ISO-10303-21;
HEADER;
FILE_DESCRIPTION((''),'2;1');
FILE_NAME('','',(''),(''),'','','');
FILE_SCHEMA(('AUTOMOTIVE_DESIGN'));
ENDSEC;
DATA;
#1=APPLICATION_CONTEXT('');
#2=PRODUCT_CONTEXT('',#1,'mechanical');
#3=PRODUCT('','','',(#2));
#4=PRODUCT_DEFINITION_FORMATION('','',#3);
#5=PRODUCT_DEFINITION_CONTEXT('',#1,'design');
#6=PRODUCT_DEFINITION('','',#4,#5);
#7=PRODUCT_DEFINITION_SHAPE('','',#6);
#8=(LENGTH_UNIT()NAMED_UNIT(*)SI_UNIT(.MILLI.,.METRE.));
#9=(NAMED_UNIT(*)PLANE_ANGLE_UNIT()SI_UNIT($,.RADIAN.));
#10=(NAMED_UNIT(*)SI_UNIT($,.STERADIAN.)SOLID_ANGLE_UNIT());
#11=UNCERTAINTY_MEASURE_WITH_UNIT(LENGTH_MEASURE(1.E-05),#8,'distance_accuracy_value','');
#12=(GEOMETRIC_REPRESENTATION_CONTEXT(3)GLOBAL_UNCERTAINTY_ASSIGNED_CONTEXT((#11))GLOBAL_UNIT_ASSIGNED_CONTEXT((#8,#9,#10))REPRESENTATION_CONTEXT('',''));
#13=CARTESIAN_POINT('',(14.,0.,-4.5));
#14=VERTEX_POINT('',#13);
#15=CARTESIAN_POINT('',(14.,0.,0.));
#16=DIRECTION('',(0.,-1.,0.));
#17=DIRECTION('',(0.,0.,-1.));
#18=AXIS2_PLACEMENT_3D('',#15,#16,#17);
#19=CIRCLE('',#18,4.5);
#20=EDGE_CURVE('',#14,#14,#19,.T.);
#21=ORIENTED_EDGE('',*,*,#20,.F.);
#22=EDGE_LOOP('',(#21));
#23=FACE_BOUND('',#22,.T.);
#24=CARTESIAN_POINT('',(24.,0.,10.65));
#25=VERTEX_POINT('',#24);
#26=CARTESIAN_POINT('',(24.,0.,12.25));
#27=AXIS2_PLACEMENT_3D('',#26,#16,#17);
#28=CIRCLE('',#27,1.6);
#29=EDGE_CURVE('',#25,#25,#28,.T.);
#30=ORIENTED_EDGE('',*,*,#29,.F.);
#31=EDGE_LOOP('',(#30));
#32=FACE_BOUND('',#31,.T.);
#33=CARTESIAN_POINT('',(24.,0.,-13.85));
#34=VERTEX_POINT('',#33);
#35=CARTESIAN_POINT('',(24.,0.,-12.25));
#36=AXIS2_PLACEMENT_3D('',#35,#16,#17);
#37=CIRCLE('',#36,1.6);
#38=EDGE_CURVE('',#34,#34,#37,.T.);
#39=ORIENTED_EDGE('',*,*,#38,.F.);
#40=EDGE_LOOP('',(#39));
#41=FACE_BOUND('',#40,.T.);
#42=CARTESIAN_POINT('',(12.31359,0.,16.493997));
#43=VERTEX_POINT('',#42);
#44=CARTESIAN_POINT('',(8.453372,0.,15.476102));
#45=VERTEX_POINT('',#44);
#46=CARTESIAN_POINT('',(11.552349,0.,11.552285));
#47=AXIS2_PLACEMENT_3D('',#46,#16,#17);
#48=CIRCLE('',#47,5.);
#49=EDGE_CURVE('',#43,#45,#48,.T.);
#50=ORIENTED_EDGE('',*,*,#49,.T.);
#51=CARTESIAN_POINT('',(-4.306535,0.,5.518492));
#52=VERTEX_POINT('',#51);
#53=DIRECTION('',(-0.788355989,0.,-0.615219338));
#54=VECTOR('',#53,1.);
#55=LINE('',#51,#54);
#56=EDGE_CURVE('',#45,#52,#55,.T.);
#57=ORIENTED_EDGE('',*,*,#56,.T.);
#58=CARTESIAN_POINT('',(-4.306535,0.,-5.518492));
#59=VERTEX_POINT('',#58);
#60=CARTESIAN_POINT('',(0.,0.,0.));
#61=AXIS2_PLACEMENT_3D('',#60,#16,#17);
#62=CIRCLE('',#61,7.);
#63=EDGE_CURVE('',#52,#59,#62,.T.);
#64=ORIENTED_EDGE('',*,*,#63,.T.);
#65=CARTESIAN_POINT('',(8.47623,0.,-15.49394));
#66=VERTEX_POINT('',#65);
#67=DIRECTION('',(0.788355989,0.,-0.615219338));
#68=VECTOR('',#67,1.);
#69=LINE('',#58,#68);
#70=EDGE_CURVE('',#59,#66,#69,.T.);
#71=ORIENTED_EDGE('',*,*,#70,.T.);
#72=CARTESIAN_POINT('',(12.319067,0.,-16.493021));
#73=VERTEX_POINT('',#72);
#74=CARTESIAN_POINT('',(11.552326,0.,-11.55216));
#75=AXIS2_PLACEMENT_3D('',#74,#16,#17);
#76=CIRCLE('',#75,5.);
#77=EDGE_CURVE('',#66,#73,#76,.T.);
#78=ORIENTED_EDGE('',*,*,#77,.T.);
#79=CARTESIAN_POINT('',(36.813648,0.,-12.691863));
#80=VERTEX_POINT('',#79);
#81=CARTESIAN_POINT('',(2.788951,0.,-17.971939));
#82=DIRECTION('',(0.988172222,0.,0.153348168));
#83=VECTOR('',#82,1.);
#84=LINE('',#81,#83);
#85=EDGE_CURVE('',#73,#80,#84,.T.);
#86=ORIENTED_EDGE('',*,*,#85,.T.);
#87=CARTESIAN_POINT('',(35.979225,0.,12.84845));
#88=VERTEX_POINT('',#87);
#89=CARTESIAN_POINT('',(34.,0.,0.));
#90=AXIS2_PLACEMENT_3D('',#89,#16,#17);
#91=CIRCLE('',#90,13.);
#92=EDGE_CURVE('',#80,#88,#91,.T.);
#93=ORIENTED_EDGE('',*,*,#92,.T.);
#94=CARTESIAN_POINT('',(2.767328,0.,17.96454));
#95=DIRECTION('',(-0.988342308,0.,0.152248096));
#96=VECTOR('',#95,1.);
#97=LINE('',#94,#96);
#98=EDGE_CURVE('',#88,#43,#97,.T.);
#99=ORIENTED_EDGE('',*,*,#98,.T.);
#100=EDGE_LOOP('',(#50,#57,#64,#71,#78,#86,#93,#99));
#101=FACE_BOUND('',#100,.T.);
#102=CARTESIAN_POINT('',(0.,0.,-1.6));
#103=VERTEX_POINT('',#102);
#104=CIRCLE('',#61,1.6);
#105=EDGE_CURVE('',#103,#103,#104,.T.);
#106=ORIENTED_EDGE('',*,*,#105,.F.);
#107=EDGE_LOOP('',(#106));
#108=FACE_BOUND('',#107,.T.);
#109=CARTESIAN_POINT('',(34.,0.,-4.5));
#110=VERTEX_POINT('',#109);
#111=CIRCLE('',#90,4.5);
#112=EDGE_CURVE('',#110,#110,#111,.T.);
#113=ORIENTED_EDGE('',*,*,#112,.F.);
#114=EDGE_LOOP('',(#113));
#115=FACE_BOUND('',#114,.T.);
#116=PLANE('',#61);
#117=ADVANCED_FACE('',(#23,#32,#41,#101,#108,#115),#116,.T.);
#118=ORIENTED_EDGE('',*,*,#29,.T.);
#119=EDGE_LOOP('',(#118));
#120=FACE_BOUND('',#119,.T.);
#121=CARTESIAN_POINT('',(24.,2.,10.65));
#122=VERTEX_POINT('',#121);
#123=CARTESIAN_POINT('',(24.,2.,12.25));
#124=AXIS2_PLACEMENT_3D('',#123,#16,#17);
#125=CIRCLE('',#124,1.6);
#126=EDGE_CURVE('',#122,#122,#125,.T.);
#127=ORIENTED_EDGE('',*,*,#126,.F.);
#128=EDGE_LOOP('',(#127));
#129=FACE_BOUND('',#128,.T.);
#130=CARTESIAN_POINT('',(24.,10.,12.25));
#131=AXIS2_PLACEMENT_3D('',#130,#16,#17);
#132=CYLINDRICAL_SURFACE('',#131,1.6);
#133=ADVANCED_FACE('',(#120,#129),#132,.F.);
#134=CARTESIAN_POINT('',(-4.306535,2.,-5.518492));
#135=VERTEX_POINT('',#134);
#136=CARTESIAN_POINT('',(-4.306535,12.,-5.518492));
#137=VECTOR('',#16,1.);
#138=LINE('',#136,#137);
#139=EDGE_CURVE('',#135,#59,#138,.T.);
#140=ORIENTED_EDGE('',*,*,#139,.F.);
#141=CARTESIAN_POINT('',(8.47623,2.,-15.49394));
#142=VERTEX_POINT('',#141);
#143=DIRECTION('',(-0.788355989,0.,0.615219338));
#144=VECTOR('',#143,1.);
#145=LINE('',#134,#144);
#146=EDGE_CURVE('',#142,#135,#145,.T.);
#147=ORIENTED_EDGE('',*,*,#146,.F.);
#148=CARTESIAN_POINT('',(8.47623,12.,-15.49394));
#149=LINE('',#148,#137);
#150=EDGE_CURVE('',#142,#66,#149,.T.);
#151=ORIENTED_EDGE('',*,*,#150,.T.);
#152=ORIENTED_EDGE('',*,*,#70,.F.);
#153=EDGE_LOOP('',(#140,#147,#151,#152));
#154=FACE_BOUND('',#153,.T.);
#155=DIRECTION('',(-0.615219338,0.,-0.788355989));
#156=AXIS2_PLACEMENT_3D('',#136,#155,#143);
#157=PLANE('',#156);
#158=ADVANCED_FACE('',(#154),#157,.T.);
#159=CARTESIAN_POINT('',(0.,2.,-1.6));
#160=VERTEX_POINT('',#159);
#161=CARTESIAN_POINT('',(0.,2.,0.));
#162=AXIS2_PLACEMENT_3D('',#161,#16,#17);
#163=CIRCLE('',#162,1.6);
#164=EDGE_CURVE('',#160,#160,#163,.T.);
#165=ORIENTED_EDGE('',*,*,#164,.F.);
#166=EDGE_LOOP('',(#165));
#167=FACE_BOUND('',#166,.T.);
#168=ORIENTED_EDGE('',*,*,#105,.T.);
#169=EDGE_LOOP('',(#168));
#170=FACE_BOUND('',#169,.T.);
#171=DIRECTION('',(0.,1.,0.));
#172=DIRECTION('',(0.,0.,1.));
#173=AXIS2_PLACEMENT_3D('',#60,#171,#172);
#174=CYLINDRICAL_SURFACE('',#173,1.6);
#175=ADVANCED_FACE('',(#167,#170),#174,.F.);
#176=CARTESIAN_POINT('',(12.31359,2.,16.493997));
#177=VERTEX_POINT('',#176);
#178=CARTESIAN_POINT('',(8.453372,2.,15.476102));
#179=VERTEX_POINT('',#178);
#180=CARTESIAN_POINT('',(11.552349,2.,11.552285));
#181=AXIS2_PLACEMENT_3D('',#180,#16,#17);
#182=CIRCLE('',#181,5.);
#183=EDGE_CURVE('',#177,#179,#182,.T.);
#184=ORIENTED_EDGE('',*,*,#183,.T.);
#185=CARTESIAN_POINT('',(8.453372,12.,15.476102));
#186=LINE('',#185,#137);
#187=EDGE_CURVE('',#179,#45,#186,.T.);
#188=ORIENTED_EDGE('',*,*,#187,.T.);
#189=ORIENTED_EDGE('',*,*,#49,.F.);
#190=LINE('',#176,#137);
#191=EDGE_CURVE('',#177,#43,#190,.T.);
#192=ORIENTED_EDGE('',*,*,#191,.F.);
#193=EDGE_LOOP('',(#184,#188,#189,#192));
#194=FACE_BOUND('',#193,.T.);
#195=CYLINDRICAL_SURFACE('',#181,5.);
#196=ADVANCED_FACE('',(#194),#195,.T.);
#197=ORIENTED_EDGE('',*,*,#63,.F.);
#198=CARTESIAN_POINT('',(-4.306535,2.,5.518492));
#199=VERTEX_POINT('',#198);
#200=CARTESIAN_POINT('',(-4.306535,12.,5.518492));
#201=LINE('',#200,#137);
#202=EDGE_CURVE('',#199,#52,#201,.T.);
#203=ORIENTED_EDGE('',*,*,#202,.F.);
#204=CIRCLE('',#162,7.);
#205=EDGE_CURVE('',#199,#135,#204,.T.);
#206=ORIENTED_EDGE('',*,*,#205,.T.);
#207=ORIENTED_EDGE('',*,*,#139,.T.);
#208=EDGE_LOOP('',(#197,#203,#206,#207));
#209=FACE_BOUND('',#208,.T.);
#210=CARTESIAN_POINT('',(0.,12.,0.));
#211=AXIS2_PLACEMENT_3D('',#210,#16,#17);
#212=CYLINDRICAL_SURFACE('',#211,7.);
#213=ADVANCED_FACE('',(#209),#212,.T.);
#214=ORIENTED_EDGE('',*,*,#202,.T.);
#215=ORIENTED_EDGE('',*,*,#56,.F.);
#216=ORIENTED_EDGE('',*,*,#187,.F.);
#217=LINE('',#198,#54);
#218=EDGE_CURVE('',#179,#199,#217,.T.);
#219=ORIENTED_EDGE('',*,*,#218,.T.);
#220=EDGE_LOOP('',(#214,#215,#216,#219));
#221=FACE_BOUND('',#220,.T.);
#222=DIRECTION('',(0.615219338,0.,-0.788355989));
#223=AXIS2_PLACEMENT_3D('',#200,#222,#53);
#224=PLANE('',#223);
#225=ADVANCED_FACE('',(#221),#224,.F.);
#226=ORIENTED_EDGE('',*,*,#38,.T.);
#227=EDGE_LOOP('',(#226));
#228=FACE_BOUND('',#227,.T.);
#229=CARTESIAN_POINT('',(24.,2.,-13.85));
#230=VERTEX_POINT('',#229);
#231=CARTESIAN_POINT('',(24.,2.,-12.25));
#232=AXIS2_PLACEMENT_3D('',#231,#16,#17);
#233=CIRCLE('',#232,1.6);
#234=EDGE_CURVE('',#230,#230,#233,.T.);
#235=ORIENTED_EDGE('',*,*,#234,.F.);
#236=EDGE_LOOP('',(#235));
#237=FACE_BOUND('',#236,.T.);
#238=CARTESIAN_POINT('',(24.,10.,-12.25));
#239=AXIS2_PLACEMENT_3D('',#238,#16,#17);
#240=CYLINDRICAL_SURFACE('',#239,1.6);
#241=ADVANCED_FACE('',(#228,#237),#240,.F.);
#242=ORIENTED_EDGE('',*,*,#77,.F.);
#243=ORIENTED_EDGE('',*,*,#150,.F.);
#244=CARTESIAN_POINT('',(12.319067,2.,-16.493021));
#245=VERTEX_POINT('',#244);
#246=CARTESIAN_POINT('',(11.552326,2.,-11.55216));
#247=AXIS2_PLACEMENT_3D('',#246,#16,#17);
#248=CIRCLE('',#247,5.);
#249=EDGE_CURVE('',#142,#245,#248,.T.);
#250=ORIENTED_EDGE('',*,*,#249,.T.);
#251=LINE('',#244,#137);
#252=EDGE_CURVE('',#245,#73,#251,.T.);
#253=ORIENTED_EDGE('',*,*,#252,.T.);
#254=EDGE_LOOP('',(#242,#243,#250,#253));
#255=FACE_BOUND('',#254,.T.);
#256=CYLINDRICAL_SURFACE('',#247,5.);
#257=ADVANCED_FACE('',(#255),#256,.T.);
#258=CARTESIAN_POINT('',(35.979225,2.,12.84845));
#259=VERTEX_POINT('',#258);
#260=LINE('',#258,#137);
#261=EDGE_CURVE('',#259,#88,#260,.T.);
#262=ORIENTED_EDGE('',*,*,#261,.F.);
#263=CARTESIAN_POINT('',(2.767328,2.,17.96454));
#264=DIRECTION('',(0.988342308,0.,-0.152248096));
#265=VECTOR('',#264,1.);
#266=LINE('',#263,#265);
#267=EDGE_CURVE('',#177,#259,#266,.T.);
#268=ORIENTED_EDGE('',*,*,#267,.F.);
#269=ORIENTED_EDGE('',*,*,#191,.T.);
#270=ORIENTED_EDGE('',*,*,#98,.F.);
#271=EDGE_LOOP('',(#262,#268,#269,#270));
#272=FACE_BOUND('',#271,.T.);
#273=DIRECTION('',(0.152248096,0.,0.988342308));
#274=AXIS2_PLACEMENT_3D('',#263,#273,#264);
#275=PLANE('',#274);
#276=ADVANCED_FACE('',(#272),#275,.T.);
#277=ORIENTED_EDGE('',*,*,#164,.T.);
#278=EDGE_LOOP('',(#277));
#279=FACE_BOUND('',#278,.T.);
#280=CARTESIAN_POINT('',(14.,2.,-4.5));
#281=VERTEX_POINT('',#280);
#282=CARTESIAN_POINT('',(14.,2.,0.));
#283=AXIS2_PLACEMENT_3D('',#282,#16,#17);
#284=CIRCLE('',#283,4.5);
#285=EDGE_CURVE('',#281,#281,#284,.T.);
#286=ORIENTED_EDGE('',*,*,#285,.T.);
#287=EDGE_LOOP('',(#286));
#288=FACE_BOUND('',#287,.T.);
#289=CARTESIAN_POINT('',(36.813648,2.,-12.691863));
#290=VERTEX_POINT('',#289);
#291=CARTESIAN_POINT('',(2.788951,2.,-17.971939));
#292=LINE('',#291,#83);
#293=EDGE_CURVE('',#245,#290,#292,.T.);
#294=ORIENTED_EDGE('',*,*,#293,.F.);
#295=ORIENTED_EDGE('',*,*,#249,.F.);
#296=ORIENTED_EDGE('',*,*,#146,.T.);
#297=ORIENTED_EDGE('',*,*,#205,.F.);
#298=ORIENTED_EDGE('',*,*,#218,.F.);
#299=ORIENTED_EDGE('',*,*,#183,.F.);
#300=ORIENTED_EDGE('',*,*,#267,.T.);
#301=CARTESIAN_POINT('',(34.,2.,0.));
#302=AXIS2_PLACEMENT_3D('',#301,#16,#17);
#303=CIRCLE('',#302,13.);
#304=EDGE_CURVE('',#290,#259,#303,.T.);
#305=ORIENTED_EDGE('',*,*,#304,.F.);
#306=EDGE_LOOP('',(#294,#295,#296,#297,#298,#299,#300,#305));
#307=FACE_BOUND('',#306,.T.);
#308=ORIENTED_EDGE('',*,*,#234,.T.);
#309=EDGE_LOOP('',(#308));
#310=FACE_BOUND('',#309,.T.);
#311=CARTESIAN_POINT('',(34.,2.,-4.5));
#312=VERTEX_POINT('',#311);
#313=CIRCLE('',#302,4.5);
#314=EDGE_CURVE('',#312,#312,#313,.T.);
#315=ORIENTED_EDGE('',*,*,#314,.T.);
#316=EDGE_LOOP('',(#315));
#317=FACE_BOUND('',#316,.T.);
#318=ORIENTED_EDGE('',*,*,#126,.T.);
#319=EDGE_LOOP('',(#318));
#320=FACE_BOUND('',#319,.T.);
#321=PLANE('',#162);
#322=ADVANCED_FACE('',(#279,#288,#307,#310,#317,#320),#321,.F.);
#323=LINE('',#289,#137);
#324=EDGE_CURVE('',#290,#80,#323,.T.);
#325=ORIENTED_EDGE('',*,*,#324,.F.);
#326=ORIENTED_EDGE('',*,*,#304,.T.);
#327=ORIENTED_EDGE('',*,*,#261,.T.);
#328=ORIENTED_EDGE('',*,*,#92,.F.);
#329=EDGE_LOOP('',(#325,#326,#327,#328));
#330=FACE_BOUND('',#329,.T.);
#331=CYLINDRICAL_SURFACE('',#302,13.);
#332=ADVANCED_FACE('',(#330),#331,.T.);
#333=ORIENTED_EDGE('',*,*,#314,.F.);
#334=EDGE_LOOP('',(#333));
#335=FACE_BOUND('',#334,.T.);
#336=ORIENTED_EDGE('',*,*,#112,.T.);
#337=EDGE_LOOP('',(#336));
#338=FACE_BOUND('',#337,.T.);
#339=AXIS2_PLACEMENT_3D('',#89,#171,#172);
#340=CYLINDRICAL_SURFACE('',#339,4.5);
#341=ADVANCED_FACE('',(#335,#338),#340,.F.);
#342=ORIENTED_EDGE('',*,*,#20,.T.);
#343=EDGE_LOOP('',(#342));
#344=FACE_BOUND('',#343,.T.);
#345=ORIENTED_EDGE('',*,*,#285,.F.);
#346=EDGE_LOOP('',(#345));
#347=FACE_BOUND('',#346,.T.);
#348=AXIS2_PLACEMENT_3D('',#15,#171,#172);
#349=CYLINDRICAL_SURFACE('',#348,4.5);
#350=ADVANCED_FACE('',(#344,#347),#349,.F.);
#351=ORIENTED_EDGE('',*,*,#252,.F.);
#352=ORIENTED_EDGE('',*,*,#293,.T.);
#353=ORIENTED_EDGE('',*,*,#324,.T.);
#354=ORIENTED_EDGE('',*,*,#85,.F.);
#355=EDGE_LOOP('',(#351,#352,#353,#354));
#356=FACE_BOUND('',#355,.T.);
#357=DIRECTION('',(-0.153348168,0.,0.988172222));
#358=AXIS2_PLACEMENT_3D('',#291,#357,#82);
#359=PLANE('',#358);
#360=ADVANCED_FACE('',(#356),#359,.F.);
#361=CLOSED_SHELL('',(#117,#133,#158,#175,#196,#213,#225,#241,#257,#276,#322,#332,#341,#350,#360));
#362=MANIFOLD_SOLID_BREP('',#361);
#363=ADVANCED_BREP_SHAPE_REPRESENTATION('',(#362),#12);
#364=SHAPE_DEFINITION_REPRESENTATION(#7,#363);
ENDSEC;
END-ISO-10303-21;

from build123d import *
from build123d.topology import SkipClean

# Parameters (mm, degrees)
SKETCH1_R               = 1.6
SKETCH1_R_2             = 1
SKETCH1_R_3             = 5.5
SKETCH1_R_4             = 4.5
BOSS_EXTRUDE2_DEPTH     = 2
BOSS_EXTRUDE3_START     = -2
SKETCH2_R               = 1
BOSS_EXTRUDE3_DEPTH     = 2
SKETCH3_R               = 1
CUT_EXTRUDE1_DEPTH      = 103
BOSS_EXTRUDE4_OUTLINE_R = 1
BOSS_EXTRUDE4_DEPTH     = 10
SKETCH5_R               = 87.063932705
CUT_EXTRUDE2_DEPTH      = 2
BOSS_EXTRUDE5_START     = 2
SKETCH6_R               = 1
SKETCH6_R_2             = 1.6
SKETCH6_R_3             = 4.5
BOSS_EXTRUDE5_DEPTH     = 2
SKETCH7_R               = 66.92041454
CUT_EXTRUDE3_DEPTH      = 10
SKETCH8_R               = 1.6
CUT_EXTRUDE4_DEPTH      = 10
BOSS_EXTRUDE6_DEPTH     = 2


# Read off the part's stored shape, not the designer's step: Boss-Extrude4
with BuildPart() as part:
    # Sketch1 → Boss-Extrude2 (new body)
    with BuildSketch(Plane(origin=(0, 0, 0), x_dir=(1, 0, 0), z_dir=(0, 1, 0))):
        with BuildLine():
            Line((12.313589515, -16.493996637), (35.979225245, -12.848450001))
            ThreePointArc((35.979225245, -12.848450001), (46.993067566, -0.424494085), (36.813648041, 12.691862933))
            Line((36.813648041, 12.691862933), (35.165189196, 12.947676785))
            Line((35.165189196, 12.947676785), (12.319067304, 16.493021261))
            ThreePointArc((12.319067304, 16.493021261), (11.720527595, 16.549330191), (11.119556233, 16.533395936))
            Line((11.119556233, 16.533395936), (-11.812019178, 14.541098507))
            ThreePointArc((-11.812019178, 14.541098507), (-13.247239988, 14.027709898), (-14.244912332, 12.87528787))
            Line((-14.244912332, 12.87528787), (-19.487592157, 2.204884721))
            ThreePointArc((-19.487592157, 2.204884721), (-19.693653105, -1.723258696), (-16.994761113, -4.584858569))
            Line((-16.994761113, -4.584858569), (9.557587922, -16.137143667))
            ThreePointArc((9.557587922, -16.137143667), (10.910298182, -16.51089082), (12.313589515, -16.493996637))
        make_face()
        with Locations(Location((11.552349036, -11.552285098, 0), (0, 0, 270))):
            Circle(SKETCH1_R, mode=Mode.SUBTRACT)
        with Locations(Location((25, -11, 0), (0, 0, 270))):
            Circle(SKETCH1_R_2, mode=Mode.SUBTRACT)
        with Locations(Location((-15, 0, 0), (0, 0, 270))):
            Circle(SKETCH1_R, mode=Mode.SUBTRACT)
        with Locations(Location((0, 0, 0), (0, 0, 270))):
            Circle(SKETCH1_R_3, mode=Mode.SUBTRACT)
        with Locations(Location((-11.552357038, 11.552357038, 0), (0, 0, 270))):
            Circle(SKETCH1_R, mode=Mode.SUBTRACT)
        with Locations(Location((11.552326466, 11.552160153, 0), (0, 0, 270))):
            Circle(SKETCH1_R, mode=Mode.SUBTRACT)
        with Locations(Location((14, 0, 0), (0, 0, 270))):
            Circle(SKETCH1_R_4, mode=Mode.SUBTRACT)
        with Locations(Location((34, 0, 0), (0, 0, 270))):
            Circle(SKETCH1_R_4, mode=Mode.SUBTRACT)
        with Locations(Location((25, 11, 0), (0, 0, 270))):
            Circle(SKETCH1_R_2, mode=Mode.SUBTRACT)
    extrude(amount=BOSS_EXTRUDE2_DEPTH)

    # Sketch2 → Boss-Extrude3 (add)
    with BuildSketch(Plane(origin=(0, 2, 0), x_dir=(1, 0, 0), z_dir=(0, 1, 0)).offset(BOSS_EXTRUDE3_START)):
        with Locations((25, 11)):
            Circle(SKETCH2_R)
        with Locations((25, -11)):
            Circle(SKETCH2_R)
    extrude(amount=BOSS_EXTRUDE3_DEPTH)

    # Sketch3 → Cut-Extrude1 (cut)
    with BuildSketch(Plane(origin=(0, 2, 0), x_dir=(1, 0, 0), z_dir=(0, 1, 0))):
        with Locations(Location((24, 13, 0), (0, 0, 270))):
            Circle(SKETCH3_R)
        with Locations(Location((24, -13, 0), (0, 0, 270))):
            Circle(SKETCH3_R)
    extrude(amount=-CUT_EXTRUDE1_DEPTH, mode=Mode.SUBTRACT)

    # Boss-Extrude4 outline → Boss-Extrude4 (add)
    with SkipClean():  # the faces are left unmerged after this step: merging them gives an invalid solid
        with BuildSketch(Plane(origin=(0, 2, 0), x_dir=(1, 0, 0), z_dir=(0, 1, 0))):
            with BuildLine():
                ThreePointArc((8.453372169, -15.47610242), (10.277484332, -16.387026041), (12.313589515, -16.493996637))
                Line((12.313589515, -16.493996637), (35.979225245, -12.848450001))
                ThreePointArc((35.979225245, -12.848450001), (46.993067566, -0.424494085), (36.813648041, 12.691862933))
                Line((36.813648041, 12.691862933), (12.319067304, 16.493021261))
                ThreePointArc((12.319067304, 16.493021261), (10.294223964, 16.391290043), (8.476229775, 15.493940099))
                Line((8.476229775, 15.493940099), (-4.306535369, 5.518491924))
                ThreePointArc((-4.306535369, 5.518491924), (-7, 0), (-4.306535369, -5.518491924))
                Line((-4.306535369, -5.518491924), (8.453372169, -15.47610242))
            make_face()
            with Locations((24, -13)):
                Circle(BOSS_EXTRUDE4_OUTLINE_R, mode=Mode.SUBTRACT)
            with BuildLine():
                Line((35.738243971, -12.126046672), (26.117255626, -13.608064851))
                Line((26.117255626, -13.608064851), (25.976685738, -12.695511096))
                ThreePointArc((25.976685738, -12.695511096), (23.695511096, -11.023314262), (22.023314262, -13.304488904))
                Line((22.023314262, -13.304488904), (22.16388415, -14.217042659))
                Line((22.16388415, -14.217042659), (12.27862862, -15.739768587))
                ThreePointArc((12.27862862, -15.739768587), (10.519552717, -15.67488522), (8.937649363, -14.902784407))
                Line((8.937649363, -14.902784407), (-3.845146577, -4.927204867))
                ThreePointArc((-3.845146577, -4.927204867), (-6.249813783, 0.048245957), (-3.768620923, 4.985979978))
                Line((-3.768620923, 4.985979978), (9.140409076, 14.743187339))
                ThreePointArc((9.140409076, 14.743187339), (10.553310252, 15.425397379), (12.119916334, 15.511685597))
                Line((12.119916334, 15.511685597), (22.133828609, 14.076211769))
                Line((22.133828609, 14.076211769), (22.020237278, 13.283794934))
                ThreePointArc((22.020237278, 13.283794934), (23.716205066, 11.020237278), (25.979762722, 12.716205066))
                Line((25.979762722, 12.716205066), (26.093354053, 13.508621901))
                Line((26.093354053, 13.508621901), (35.738243971, 12.126046672))
                ThreePointArc((35.738243971, 12.126046672), (46.25, 0), (35.738243971, -12.126046672))
            make_face(mode=Mode.SUBTRACT)
            with Locations((24, 13)):
                Circle(BOSS_EXTRUDE4_OUTLINE_R, mode=Mode.SUBTRACT)
        extrude(amount=BOSS_EXTRUDE4_DEPTH)
    add(part.part.scale(1), mode=Mode.REPLACE)  # the faces are merged on a copy

    # Sketch5 → Cut-Extrude2 (cut)
    with BuildSketch(Plane(origin=(0, 0, 0), x_dir=(-1, 0, 0), z_dir=(0, -1, 0))):
        Circle(SKETCH5_R)
    extrude(amount=-CUT_EXTRUDE2_DEPTH, mode=Mode.SUBTRACT)

    # Sketch6 → Boss-Extrude5 (add)
    with BuildSketch(Plane(origin=(0, 2, 0), x_dir=(-1, 0, 0), z_dir=(0, -1, 0)).offset(BOSS_EXTRUDE5_START)):
        with BuildLine():
            Line((4.306535369, -5.518491924), (-8.453372169, -15.47610242))
            ThreePointArc((-8.453372169, -15.47610242), (-10.277484331, -16.387026041), (-12.313589515, -16.493996637))
            Line((-12.313589515, -16.493996637), (-35.979225245, -12.848450001))
            ThreePointArc((-35.979225245, -12.848450001), (-46.993067566, -0.424494085), (-36.813648041, 12.691862933))
            Line((-36.813648041, 12.691862933), (-12.319067304, 16.493021261))
            ThreePointArc((-12.319067304, 16.493021261), (-10.294223964, 16.391290043), (-8.476229775, 15.493940099))
            Line((-8.476229775, 15.493940099), (4.306535369, 5.518491924))
            ThreePointArc((4.306535369, 5.518491924), (7, 0), (4.306535369, -5.518491924))
        make_face()
        with Locations(Location((-24, -13, 0), (0, 0, 270))):
            Circle(SKETCH6_R, mode=Mode.SUBTRACT)
        with Locations(Location((-24, 13, 0), (0, 0, 270))):
            Circle(SKETCH6_R, mode=Mode.SUBTRACT)
        with Locations(Location((0, 0, 0), (0, 0, 90))):
            Circle(SKETCH6_R_2, mode=Mode.SUBTRACT)
        with Locations(Location((-34, 0, 0), (0, 0, 90))):
            Circle(SKETCH6_R_3, mode=Mode.SUBTRACT)
        with Locations(Location((-14, 0, 0), (0, 0, 90))):
            Circle(SKETCH6_R_3, mode=Mode.SUBTRACT)
    extrude(amount=-BOSS_EXTRUDE5_DEPTH)

    # Sketch7 → Cut-Extrude3 (cut)
    with BuildSketch(Plane(origin=(0, 12, 0), x_dir=(1, 0, 0), z_dir=(0, 1, 0))):
        Circle(SKETCH7_R)
    extrude(amount=-CUT_EXTRUDE3_DEPTH, mode=Mode.SUBTRACT)

    # Sketch8 → Cut-Extrude4 (cut)
    with BuildSketch(Plane(origin=(0, 0, 0), x_dir=(-1, 0, 0), z_dir=(0, -1, 0))):
        with Locations((-24, -12.25)):
            Circle(SKETCH8_R)
        with Locations((-24, 12.25)):
            Circle(SKETCH8_R)
    extrude(amount=-CUT_EXTRUDE4_DEPTH, mode=Mode.SUBTRACT)

    # Sketch9 → Boss-Extrude6 (add)
    with BuildSketch(Plane(origin=(0, 0, 0), x_dir=(-1, 0, 0), z_dir=(0, -1, 0))):
        with BuildLine():
            ThreePointArc((-24.746843357, -13.665), (-24, -13.85), (-23.253156643, -13.665))
            ThreePointArc((-23.253156643, -13.665), (-24, -14), (-24.746843357, -13.665))
        make_face()
        with BuildLine():
            ThreePointArc((-23.253156643, 13.665), (-24, 13.85), (-24.746843357, 13.665))
            ThreePointArc((-24.746843357, 13.665), (-24, 14), (-23.253156643, 13.665))
        make_face()
    extrude(amount=-BOSS_EXTRUDE6_DEPTH)


solid = part.part
